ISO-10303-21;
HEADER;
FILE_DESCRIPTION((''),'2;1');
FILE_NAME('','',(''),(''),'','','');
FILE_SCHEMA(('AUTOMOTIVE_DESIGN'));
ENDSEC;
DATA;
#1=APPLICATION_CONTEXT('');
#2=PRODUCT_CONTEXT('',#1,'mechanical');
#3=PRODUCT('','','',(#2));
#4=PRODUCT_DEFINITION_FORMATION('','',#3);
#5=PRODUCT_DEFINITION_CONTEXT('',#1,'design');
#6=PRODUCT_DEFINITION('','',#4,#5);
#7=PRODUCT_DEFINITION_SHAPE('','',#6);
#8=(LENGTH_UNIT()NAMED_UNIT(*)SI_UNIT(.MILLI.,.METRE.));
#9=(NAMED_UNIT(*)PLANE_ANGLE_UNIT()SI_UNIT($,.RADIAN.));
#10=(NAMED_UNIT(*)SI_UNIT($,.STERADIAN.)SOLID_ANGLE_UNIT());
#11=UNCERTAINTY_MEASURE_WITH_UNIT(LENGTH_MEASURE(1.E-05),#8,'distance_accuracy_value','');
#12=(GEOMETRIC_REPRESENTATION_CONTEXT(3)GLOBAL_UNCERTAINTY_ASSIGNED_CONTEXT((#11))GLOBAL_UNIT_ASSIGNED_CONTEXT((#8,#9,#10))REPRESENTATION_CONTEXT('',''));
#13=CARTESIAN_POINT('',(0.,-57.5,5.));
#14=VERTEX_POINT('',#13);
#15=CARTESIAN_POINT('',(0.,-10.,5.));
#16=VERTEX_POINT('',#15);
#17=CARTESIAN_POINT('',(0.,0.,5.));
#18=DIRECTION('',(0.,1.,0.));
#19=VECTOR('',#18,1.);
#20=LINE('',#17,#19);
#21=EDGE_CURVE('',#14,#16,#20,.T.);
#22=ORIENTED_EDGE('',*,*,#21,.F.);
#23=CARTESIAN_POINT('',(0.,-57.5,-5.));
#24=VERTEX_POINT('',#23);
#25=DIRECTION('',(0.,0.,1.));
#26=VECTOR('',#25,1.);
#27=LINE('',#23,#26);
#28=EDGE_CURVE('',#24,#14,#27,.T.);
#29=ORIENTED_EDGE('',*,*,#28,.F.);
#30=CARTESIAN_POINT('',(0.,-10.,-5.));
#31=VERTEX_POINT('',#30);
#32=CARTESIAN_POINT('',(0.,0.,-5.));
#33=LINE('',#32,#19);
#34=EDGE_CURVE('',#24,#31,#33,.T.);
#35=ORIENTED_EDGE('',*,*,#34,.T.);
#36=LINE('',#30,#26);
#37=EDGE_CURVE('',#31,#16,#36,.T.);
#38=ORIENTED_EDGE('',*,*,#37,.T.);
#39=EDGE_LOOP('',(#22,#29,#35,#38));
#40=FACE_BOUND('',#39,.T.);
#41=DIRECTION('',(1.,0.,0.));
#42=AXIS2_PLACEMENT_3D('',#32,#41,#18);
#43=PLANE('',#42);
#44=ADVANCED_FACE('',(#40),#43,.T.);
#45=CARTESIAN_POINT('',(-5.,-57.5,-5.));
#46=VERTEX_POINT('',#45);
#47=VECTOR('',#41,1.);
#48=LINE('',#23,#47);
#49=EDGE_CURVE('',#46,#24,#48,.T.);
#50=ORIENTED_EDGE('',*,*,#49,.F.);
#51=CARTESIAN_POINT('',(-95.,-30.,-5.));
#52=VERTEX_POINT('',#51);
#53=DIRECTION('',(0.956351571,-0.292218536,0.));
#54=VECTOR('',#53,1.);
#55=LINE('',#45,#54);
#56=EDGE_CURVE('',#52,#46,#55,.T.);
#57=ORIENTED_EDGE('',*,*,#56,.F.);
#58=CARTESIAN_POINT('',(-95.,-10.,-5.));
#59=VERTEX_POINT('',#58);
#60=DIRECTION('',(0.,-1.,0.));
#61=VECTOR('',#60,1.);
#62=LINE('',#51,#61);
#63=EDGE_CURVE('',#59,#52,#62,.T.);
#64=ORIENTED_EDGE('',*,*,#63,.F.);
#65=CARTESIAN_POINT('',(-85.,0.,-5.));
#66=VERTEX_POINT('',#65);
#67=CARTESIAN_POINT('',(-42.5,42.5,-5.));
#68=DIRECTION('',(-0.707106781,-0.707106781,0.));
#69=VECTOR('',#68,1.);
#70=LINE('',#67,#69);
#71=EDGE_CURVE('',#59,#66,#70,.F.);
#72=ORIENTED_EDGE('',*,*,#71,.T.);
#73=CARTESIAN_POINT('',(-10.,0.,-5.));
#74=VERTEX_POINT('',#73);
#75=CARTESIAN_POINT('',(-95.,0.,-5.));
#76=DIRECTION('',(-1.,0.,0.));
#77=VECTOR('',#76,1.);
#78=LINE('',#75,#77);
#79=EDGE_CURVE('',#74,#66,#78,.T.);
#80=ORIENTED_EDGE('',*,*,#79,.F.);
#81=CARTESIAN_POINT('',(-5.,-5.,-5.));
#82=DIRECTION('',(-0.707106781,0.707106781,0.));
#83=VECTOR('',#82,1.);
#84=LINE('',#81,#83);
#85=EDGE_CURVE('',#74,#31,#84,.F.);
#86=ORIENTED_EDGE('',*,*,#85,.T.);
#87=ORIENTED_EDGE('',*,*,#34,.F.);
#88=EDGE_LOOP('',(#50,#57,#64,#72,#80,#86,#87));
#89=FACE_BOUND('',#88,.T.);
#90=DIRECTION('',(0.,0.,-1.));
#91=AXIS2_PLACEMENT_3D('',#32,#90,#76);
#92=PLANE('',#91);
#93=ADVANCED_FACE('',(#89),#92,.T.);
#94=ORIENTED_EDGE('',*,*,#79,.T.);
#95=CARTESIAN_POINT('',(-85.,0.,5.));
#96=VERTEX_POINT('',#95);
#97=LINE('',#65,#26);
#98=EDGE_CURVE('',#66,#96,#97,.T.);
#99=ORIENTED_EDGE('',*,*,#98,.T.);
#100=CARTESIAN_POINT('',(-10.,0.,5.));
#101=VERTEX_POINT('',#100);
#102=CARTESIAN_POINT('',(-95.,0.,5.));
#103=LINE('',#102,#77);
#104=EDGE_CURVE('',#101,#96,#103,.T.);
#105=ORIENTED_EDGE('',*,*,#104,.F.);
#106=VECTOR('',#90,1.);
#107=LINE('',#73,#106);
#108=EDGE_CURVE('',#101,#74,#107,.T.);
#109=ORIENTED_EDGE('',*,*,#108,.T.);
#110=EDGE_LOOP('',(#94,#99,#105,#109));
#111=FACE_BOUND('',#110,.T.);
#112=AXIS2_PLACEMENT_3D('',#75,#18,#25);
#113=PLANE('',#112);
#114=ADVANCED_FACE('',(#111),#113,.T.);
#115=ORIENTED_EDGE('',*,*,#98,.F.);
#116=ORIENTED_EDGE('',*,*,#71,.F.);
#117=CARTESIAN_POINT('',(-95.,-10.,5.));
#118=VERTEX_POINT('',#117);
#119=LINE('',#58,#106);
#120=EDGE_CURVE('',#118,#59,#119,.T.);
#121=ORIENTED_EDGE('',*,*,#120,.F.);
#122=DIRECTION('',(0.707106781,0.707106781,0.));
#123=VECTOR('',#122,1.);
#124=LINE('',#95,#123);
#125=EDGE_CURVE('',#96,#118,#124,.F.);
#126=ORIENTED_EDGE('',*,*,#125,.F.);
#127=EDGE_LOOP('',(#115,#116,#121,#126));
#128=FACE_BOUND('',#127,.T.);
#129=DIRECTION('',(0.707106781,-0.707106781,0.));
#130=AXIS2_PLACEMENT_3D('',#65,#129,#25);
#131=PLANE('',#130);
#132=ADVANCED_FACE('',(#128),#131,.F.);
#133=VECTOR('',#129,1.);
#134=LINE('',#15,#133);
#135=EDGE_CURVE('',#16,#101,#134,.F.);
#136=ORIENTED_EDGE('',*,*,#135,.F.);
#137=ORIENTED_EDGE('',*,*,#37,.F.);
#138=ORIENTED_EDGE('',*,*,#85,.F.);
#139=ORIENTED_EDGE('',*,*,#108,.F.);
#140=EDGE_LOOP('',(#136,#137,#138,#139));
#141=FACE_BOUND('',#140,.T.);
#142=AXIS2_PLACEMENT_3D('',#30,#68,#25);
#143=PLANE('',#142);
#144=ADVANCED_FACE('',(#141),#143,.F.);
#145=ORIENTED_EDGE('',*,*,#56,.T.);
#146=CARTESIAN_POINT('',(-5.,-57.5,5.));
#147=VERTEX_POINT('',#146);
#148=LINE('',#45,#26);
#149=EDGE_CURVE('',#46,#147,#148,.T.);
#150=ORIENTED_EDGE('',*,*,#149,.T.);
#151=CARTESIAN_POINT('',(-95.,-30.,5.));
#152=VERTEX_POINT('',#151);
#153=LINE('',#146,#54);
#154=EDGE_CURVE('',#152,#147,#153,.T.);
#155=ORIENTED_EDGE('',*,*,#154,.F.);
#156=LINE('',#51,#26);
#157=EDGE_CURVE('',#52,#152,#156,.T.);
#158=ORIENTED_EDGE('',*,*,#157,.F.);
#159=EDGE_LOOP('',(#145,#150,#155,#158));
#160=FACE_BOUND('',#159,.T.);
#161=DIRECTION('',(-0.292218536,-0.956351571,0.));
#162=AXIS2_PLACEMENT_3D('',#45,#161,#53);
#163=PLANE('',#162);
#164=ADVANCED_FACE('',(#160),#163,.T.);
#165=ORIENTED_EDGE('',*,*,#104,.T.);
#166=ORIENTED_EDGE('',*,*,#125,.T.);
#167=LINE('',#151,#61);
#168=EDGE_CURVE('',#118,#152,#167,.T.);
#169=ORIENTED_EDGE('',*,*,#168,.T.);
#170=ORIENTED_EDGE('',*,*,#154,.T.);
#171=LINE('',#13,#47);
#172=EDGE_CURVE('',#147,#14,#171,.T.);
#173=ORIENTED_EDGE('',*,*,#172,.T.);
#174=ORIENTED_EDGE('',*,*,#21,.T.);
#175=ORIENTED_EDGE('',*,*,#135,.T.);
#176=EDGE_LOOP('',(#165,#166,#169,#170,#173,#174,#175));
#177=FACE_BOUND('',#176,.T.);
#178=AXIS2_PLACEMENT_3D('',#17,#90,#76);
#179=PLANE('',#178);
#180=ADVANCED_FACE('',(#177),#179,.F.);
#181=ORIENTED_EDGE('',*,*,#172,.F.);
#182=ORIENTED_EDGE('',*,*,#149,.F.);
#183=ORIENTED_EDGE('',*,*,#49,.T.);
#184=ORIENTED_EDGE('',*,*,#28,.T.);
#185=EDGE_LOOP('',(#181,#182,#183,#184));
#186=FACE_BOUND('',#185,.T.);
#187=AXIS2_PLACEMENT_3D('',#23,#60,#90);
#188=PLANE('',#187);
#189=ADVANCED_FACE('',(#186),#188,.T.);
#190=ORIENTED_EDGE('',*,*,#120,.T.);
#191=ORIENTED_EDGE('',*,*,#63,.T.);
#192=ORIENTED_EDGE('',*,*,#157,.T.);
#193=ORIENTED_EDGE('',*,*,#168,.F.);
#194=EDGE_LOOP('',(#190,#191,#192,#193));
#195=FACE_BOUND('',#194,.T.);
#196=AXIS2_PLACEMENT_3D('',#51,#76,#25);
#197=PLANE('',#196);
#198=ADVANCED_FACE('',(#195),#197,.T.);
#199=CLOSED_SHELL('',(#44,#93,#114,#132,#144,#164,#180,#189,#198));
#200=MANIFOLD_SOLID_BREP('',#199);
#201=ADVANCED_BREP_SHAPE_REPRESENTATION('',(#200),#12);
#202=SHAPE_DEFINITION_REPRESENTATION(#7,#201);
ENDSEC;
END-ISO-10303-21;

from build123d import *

# Parameters (mm, degrees)
SM_START               = -5
SM_BASE_FLANGE_1_DEPTH = 10
CHAMFER_1_SIZE         = 10


# Read off the part's stored shape, not the designer's step: Базовая кромка1
with BuildPart() as part:
    # Базовая кромка1 outline → Базовая кромка1 (new body)
    with BuildSketch(Plane.XY.offset(SM_START)):
        Polygon((0, 0), (-95, 0), (-95, -30), (-5, -57.5), (0, -57.5), align=None)
    extrude(amount=SM_BASE_FLANGE_1_DEPTH)

    # Фаска1
    chamfer_1_edges = [part.edges().sort_by_distance(p)[0] for p in [
        (-95, 0, 0),
        (0, 0, 0),
    ]]
    chamfer(chamfer_1_edges, length=CHAMFER_1_SIZE)


solid = part.part
